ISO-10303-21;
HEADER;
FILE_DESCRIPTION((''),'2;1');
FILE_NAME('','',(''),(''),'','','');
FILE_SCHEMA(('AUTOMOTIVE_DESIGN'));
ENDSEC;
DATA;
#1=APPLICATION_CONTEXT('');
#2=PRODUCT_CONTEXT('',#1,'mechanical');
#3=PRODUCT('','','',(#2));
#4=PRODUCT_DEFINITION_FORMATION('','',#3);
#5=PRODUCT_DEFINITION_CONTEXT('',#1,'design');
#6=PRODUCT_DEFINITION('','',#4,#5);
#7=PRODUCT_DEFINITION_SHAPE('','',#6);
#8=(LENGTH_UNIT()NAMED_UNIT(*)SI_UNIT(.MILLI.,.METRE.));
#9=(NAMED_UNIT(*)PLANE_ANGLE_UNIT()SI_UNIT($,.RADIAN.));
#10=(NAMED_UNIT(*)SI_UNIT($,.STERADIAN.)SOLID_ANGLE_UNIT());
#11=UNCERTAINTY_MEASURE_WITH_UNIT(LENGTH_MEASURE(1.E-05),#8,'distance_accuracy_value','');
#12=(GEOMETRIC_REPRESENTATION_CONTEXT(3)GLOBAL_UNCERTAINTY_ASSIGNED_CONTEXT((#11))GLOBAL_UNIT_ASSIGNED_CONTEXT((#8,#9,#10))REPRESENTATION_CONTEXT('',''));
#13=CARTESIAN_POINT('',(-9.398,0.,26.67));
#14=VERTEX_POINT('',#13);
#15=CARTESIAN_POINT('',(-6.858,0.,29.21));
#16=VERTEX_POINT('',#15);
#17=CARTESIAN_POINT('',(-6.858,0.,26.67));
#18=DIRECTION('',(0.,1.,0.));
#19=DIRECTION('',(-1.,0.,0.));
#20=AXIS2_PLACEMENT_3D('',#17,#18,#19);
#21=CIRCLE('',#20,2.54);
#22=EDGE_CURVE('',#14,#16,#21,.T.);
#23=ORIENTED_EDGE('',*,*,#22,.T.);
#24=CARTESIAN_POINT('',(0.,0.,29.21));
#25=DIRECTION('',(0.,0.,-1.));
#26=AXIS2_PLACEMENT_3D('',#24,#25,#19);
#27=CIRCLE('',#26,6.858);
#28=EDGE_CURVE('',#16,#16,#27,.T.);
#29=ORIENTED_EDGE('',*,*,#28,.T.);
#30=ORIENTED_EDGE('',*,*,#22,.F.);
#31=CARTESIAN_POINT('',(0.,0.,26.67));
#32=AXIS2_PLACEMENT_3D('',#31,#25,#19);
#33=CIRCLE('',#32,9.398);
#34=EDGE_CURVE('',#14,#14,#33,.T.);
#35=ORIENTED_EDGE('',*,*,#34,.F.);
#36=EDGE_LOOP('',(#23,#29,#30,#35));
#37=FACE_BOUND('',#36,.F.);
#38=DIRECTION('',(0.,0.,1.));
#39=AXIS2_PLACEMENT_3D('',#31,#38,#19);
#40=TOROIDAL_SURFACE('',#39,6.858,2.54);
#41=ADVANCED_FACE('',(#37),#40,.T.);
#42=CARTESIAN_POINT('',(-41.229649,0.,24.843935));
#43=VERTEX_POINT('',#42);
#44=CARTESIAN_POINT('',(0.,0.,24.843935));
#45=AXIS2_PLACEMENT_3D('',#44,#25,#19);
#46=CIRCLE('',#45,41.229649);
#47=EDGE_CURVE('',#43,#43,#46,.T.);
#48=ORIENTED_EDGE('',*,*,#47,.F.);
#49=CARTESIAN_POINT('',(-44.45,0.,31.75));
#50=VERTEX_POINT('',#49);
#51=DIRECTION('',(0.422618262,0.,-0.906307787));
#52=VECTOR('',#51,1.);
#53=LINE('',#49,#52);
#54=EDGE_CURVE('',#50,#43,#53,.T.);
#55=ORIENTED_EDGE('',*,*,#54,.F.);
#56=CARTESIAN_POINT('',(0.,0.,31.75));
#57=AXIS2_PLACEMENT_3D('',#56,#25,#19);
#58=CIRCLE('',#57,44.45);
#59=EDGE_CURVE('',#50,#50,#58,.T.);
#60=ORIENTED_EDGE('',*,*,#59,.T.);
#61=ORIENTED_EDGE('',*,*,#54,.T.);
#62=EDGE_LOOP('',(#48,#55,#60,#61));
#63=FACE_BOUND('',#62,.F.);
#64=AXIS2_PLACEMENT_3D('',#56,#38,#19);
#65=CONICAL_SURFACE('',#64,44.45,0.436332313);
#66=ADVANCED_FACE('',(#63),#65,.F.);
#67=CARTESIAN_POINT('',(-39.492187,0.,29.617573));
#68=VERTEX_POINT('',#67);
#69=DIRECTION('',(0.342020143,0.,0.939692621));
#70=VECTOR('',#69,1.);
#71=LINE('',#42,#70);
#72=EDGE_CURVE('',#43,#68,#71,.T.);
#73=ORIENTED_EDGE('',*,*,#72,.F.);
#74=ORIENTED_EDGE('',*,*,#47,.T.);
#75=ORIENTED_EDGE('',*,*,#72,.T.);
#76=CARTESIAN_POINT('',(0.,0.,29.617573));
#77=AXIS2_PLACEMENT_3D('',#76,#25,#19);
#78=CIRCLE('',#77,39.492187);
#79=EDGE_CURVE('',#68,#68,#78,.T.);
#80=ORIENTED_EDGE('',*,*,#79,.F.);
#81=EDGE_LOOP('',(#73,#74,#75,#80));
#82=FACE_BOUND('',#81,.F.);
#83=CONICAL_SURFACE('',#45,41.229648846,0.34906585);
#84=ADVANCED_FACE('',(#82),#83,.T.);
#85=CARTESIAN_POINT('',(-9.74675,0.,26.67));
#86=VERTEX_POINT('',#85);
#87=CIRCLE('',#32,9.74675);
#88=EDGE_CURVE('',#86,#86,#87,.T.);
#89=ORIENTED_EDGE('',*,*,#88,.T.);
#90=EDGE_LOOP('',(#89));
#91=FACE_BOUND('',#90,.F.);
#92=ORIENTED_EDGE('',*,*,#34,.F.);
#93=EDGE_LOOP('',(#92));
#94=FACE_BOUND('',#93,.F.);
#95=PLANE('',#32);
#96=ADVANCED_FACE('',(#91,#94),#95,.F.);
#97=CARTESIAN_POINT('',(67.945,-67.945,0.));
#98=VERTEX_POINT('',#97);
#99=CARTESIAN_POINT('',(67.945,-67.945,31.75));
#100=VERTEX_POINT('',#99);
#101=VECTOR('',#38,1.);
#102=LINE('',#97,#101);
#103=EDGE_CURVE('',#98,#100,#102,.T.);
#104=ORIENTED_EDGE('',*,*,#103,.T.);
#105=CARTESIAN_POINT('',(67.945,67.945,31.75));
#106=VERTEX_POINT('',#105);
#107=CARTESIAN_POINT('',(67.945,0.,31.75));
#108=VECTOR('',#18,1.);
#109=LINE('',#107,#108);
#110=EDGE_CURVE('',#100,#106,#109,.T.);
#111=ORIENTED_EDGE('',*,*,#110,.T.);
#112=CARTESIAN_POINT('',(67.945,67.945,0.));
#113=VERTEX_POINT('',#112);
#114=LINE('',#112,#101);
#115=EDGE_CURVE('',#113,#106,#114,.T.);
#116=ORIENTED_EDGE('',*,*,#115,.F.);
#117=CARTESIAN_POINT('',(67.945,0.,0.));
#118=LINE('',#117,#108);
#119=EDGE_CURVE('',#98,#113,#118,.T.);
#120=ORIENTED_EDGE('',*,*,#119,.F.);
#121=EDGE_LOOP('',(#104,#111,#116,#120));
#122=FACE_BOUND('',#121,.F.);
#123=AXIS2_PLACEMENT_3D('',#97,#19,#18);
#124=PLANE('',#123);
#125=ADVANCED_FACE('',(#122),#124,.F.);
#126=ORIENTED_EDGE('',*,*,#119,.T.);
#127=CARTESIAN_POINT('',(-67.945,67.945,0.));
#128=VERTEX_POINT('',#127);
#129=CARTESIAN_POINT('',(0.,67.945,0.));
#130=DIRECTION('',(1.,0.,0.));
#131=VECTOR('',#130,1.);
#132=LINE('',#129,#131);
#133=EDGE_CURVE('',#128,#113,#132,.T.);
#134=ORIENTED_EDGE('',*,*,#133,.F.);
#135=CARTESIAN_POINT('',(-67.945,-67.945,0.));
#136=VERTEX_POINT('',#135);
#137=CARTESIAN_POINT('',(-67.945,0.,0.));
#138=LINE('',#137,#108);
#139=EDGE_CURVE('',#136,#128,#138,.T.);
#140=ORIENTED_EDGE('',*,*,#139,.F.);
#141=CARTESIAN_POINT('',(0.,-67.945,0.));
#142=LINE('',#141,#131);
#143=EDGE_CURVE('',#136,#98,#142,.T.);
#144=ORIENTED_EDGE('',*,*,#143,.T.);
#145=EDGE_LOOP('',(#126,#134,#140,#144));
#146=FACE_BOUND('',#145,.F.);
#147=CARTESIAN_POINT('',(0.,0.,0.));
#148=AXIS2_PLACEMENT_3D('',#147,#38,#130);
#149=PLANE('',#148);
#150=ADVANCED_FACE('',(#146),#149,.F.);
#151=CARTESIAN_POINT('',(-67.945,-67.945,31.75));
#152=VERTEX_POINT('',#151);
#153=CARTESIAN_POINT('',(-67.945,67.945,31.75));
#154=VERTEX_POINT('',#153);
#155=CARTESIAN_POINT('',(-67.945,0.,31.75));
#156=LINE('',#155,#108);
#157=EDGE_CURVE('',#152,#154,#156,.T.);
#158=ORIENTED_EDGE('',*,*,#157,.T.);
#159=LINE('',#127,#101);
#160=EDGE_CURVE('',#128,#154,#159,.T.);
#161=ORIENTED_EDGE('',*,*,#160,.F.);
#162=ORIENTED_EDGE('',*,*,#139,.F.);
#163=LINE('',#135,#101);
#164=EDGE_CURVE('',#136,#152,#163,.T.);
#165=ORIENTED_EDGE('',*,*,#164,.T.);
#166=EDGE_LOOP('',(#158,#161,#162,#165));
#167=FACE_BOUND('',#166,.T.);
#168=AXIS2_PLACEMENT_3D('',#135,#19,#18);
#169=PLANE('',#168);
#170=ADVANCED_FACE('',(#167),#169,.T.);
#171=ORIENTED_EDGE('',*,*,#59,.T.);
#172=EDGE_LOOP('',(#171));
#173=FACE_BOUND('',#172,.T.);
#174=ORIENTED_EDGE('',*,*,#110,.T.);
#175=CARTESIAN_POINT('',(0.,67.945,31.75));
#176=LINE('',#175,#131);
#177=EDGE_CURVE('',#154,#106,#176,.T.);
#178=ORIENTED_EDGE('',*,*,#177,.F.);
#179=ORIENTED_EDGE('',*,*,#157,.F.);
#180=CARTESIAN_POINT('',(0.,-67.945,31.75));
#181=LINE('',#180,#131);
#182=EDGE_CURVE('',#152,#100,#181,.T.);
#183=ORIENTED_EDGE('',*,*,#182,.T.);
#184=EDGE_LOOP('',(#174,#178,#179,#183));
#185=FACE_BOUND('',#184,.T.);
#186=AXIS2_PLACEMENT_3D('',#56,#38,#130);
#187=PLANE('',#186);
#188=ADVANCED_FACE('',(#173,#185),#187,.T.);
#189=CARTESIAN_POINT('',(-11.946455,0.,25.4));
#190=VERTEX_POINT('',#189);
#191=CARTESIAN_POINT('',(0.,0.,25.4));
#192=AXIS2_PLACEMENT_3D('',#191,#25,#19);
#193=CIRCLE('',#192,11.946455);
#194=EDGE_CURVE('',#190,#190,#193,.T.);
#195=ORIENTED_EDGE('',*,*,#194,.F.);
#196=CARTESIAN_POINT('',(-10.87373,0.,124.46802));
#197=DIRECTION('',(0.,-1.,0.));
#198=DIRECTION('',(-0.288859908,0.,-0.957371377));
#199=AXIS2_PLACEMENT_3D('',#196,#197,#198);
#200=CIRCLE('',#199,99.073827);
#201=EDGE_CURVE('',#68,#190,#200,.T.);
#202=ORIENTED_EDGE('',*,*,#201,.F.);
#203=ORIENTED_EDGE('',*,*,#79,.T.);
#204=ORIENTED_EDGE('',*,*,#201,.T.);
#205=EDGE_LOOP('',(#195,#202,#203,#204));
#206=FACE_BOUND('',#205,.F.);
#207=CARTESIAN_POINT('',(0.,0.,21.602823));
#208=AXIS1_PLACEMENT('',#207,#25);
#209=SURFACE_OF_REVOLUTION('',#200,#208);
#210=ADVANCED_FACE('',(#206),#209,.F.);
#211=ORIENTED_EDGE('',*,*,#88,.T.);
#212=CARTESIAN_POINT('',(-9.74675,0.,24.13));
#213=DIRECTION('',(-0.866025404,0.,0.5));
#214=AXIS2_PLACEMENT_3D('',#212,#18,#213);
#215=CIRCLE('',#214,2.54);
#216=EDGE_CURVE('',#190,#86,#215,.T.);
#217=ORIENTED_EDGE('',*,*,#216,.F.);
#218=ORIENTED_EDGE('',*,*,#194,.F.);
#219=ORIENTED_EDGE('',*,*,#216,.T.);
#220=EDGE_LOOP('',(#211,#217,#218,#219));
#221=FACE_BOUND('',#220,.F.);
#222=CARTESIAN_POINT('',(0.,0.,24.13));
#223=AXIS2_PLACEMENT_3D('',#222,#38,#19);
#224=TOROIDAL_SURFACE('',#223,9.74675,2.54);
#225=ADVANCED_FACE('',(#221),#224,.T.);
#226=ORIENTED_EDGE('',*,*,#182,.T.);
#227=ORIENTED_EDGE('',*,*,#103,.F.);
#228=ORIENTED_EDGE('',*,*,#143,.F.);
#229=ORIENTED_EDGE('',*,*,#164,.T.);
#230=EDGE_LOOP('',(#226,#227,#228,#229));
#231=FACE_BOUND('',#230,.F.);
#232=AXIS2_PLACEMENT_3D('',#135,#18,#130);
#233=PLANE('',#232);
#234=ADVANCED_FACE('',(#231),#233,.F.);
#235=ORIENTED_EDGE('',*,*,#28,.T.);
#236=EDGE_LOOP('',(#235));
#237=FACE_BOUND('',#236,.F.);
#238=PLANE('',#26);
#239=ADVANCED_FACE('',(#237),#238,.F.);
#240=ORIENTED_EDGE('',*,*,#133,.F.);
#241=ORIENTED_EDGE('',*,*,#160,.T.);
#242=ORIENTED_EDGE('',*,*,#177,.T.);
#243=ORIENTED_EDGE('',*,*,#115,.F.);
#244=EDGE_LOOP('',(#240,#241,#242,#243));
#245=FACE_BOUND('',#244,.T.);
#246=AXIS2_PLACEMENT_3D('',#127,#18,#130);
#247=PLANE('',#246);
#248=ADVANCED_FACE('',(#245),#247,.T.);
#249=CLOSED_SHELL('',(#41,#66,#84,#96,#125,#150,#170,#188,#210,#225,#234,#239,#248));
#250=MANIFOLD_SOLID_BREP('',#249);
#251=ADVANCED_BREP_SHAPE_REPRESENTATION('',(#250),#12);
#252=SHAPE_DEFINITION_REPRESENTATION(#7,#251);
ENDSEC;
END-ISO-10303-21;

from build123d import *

# Parameters (mm, degrees)
F0_W     = 135.89
F0_H     = 135.89
F1_DEPTH = 31.75


# Not quite as in the source:
# - a fillet or chamfer that OpenCascade refuses, or shapes differently, is made with other operations: its cross-section is extruded or revolved along the edge and cut away or added


with BuildPart() as f1:
    # F0 (on Top) → F1 (new body)
    with BuildSketch(Plane.XY):
        Rectangle(F0_W, F0_H)
    extrude(amount=F1_DEPTH)

    # F2 (on Front) → F3 (revolve, cut)
    with BuildSketch(Plane.XZ):
        with BuildLine():
            Line((0, 29.21), (0, 31.75))
            Line((0, 31.75), (-44.45, 31.75))
            Line((-44.45, 31.75), (-41.2296488455, 24.8439346628))
            Line((-41.2296488455, 24.8439346628), (-39.4921865174, 29.6175731764))
            ThreePointArc((-39.4921865174, 29.6175731764), (-25.8683470518, 26.5354678002), (-11.9464546442, 25.4))
            Line((-11.9464546442, 25.4), (-11.9464546442, 26.67))
            Line((-11.9464546442, 26.67), (-9.398, 26.67))
            Line((-9.398, 26.67), (-9.398, 29.21))
            Line((-9.398, 29.21), (0, 29.21))
        make_face()
    revolve(axis=Axis((0, 0, 21.6028230067), (0, 0, -1)), mode=Mode.SUBTRACT)

    # F4: fillet of radius 2.54 on 2 edges, made by hand

    # F4_s1 → F4_t2 (revolve, cut)
    with BuildSketch(Plane.XZ):
        with BuildLine():
            ThreePointArc((-9.398, 26.67), (-8.6540512242, 28.4660512242), (-6.858, 29.21))
            Line((-6.858, 29.21), (-9.398, 29.21))
            Line((-9.398, 29.21), (-9.398, 26.67))
        make_face()
    revolve(axis=Axis((0, 0, 29.21), (0, 0, -1)), mode=Mode.SUBTRACT)

    # F4_s3 → F4_t4 (revolve, cut)
    with BuildSketch(Plane.XZ):
        with BuildLine():
            ThreePointArc((-11.9464546442, 25.4), (-11.0167501186, 26.3297045256), (-9.7467501186, 26.67))
            Line((-9.7467501186, 26.67), (-11.9464546442, 26.67))
            Line((-11.9464546442, 26.67), (-11.9464546442, 25.4))
        make_face()
    revolve(axis=Axis((0, 0, 26.67), (0, 0, -1)), mode=Mode.SUBTRACT)


solid = f1.part
